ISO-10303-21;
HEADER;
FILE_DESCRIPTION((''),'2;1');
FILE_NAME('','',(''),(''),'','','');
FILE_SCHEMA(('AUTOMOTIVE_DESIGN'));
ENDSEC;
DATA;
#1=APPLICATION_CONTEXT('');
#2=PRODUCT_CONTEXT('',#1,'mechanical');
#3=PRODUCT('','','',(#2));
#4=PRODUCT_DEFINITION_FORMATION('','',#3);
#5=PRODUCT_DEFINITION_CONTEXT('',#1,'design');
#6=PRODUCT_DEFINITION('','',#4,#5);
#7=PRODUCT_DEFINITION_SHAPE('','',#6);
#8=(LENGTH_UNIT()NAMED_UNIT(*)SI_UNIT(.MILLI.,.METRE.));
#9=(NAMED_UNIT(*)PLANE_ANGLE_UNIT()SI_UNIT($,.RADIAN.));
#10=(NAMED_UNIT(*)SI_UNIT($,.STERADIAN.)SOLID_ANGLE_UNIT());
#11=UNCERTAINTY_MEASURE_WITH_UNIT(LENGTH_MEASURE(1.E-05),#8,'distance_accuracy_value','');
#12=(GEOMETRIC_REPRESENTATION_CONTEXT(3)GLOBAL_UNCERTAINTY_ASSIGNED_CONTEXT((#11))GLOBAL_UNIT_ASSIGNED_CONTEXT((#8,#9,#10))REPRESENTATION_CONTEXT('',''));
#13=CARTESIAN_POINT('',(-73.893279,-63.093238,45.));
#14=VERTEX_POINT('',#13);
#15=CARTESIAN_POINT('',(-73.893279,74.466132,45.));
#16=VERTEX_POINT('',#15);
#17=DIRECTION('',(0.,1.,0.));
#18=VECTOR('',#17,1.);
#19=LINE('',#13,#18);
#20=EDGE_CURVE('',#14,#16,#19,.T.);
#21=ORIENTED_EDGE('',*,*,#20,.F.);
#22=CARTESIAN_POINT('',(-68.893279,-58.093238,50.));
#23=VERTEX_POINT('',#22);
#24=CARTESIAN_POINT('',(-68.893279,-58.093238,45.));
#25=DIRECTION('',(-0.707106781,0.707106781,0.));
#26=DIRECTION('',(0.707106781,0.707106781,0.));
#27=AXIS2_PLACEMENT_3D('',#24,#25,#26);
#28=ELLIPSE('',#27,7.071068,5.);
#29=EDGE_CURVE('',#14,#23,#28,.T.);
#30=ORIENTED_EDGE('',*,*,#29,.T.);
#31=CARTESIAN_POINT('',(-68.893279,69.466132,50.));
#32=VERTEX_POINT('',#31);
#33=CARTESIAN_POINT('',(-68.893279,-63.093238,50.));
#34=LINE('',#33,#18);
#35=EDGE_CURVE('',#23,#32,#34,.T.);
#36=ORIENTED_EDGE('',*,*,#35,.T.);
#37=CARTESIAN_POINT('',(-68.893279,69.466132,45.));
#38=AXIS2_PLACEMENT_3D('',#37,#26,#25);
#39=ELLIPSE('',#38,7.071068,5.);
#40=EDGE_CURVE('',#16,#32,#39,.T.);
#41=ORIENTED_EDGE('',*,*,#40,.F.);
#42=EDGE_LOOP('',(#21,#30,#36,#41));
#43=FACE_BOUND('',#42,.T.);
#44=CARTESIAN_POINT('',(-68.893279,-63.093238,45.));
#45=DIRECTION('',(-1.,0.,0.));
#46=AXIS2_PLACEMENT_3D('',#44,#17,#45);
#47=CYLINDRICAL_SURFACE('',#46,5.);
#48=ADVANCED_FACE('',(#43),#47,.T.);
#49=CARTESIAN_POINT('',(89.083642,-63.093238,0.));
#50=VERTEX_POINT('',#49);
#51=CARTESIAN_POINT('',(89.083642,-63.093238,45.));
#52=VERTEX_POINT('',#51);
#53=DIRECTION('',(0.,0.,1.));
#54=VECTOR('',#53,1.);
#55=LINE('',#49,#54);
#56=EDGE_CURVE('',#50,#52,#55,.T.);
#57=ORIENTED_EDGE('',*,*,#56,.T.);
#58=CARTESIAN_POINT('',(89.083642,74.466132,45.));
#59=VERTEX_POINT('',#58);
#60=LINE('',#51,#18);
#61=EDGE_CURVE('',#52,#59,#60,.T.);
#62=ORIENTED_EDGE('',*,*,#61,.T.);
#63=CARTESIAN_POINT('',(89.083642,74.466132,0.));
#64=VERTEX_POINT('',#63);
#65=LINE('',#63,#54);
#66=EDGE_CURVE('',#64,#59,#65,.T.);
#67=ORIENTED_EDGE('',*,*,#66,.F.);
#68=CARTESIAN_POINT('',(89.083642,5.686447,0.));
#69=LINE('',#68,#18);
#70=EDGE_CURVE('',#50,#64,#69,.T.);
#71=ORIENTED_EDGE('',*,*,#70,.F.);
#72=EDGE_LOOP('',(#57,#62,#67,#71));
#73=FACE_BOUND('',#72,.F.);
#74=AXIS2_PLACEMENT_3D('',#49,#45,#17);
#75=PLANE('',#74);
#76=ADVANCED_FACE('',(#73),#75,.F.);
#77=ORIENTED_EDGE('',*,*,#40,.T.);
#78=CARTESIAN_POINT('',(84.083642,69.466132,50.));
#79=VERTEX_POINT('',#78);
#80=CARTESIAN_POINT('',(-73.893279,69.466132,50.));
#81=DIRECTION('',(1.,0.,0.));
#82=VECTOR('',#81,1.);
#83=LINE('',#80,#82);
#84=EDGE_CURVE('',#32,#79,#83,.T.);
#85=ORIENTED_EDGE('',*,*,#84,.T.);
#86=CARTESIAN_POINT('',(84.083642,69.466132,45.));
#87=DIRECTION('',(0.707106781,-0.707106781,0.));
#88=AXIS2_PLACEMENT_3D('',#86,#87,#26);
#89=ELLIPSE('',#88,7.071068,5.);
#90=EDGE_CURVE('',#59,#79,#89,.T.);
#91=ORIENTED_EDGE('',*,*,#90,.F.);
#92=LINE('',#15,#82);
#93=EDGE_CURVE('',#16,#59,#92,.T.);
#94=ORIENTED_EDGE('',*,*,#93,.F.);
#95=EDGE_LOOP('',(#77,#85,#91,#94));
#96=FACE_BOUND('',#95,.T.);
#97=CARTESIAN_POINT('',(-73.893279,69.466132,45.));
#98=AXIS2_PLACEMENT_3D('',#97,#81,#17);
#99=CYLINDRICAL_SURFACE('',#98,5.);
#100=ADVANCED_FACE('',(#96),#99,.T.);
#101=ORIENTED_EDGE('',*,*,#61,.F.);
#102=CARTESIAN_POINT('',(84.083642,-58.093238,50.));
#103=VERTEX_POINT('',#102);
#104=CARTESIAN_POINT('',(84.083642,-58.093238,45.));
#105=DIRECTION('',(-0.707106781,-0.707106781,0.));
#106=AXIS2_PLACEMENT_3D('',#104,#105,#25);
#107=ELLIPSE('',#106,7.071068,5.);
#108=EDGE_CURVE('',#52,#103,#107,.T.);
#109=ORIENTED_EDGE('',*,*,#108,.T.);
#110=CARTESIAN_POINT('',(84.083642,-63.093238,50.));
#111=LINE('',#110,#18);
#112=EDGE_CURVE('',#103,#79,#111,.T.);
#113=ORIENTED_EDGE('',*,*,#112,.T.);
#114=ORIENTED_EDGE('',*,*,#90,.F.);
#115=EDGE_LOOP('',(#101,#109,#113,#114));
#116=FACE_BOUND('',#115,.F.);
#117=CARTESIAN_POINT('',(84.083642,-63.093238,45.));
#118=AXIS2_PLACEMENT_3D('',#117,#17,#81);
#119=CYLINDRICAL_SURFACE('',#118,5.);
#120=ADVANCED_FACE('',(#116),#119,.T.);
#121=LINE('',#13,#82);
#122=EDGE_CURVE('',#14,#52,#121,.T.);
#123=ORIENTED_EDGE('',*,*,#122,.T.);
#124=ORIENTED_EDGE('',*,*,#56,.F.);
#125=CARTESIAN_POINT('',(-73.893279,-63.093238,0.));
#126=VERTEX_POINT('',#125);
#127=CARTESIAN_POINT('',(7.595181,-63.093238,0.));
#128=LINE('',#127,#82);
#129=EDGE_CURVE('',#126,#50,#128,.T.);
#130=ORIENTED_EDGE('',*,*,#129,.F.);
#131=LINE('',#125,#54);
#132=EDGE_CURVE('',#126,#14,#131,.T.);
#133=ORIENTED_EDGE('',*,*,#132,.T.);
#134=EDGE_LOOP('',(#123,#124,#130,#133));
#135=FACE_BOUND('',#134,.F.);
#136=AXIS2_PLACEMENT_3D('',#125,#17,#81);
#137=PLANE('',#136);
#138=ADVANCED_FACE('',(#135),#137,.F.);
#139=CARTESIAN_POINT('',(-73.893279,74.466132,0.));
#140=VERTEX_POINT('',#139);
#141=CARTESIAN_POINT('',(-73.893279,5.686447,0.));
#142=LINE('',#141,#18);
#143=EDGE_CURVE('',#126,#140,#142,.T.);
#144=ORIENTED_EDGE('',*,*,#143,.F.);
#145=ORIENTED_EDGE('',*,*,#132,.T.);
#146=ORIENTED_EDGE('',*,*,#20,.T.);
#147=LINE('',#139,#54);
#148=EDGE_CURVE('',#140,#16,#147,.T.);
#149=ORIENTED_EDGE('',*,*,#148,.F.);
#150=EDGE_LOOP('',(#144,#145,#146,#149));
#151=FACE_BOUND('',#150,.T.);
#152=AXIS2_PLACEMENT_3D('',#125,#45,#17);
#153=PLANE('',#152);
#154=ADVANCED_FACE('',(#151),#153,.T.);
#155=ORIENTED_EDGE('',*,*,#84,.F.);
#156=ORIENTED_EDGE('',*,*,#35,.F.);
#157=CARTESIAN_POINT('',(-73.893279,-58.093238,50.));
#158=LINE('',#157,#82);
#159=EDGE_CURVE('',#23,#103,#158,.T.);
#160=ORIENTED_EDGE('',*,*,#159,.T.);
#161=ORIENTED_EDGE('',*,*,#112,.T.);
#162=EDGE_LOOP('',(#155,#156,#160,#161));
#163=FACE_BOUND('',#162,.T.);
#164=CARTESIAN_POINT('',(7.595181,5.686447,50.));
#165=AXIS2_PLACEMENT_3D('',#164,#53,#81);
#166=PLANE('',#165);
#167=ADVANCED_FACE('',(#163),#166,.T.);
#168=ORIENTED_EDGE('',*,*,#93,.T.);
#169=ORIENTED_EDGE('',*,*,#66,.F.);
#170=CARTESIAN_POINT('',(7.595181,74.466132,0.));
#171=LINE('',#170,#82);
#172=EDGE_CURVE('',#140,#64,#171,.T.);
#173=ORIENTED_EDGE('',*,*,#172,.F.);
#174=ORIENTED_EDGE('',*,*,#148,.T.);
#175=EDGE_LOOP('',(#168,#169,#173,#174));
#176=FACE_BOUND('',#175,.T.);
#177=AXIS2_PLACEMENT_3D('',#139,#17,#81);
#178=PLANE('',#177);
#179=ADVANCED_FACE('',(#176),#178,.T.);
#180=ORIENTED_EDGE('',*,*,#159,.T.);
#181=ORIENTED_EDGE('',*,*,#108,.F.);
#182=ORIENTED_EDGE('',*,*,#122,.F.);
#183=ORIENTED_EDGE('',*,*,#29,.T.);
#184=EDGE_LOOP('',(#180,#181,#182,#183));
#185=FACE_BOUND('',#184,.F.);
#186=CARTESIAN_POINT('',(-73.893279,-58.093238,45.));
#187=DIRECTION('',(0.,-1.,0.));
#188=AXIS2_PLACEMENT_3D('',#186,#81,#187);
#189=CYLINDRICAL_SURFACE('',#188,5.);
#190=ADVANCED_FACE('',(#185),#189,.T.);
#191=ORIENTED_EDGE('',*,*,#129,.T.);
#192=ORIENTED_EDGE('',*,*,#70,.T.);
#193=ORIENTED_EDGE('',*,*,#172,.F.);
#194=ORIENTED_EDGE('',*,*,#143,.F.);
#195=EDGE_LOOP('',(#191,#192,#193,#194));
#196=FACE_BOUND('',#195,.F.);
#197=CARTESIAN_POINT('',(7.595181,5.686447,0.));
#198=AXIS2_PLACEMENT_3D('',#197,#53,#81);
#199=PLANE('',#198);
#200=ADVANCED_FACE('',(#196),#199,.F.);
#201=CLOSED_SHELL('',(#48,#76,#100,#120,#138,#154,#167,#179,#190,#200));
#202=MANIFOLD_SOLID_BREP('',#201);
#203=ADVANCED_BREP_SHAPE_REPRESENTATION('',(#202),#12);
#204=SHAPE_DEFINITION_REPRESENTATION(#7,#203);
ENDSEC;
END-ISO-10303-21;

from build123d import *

# Parameters (mm, degrees)
F0_W     = 162.9769206047
F0_H     = 137.5593692064
F1_DEPTH = 50
F3_R     = 5


# Not quite as in the source:
# - a feature of the source that left no trace in its solid (it failed there, or was rolled back) is left out


with BuildPart() as f1:
    # F0 (on Top) → F1 (new body)
    with BuildSketch(Plane.XY):
        with Locations((7.5951814651, 5.6864470243)):
            Rectangle(F0_W, F0_H)
    extrude(amount=F1_DEPTH)

    # F3
    f3_edges = [f1.edges().sort_by_distance(p)[0] for p in [
        (89.083642, 5.686447, 50),
        (7.595181, -63.093238, 50),
        (-73.893279, 5.686447, 50),
        (7.595181, 74.466132, 50),
    ]]
    fillet(f3_edges, radius=F3_R)


solid = f1.part
